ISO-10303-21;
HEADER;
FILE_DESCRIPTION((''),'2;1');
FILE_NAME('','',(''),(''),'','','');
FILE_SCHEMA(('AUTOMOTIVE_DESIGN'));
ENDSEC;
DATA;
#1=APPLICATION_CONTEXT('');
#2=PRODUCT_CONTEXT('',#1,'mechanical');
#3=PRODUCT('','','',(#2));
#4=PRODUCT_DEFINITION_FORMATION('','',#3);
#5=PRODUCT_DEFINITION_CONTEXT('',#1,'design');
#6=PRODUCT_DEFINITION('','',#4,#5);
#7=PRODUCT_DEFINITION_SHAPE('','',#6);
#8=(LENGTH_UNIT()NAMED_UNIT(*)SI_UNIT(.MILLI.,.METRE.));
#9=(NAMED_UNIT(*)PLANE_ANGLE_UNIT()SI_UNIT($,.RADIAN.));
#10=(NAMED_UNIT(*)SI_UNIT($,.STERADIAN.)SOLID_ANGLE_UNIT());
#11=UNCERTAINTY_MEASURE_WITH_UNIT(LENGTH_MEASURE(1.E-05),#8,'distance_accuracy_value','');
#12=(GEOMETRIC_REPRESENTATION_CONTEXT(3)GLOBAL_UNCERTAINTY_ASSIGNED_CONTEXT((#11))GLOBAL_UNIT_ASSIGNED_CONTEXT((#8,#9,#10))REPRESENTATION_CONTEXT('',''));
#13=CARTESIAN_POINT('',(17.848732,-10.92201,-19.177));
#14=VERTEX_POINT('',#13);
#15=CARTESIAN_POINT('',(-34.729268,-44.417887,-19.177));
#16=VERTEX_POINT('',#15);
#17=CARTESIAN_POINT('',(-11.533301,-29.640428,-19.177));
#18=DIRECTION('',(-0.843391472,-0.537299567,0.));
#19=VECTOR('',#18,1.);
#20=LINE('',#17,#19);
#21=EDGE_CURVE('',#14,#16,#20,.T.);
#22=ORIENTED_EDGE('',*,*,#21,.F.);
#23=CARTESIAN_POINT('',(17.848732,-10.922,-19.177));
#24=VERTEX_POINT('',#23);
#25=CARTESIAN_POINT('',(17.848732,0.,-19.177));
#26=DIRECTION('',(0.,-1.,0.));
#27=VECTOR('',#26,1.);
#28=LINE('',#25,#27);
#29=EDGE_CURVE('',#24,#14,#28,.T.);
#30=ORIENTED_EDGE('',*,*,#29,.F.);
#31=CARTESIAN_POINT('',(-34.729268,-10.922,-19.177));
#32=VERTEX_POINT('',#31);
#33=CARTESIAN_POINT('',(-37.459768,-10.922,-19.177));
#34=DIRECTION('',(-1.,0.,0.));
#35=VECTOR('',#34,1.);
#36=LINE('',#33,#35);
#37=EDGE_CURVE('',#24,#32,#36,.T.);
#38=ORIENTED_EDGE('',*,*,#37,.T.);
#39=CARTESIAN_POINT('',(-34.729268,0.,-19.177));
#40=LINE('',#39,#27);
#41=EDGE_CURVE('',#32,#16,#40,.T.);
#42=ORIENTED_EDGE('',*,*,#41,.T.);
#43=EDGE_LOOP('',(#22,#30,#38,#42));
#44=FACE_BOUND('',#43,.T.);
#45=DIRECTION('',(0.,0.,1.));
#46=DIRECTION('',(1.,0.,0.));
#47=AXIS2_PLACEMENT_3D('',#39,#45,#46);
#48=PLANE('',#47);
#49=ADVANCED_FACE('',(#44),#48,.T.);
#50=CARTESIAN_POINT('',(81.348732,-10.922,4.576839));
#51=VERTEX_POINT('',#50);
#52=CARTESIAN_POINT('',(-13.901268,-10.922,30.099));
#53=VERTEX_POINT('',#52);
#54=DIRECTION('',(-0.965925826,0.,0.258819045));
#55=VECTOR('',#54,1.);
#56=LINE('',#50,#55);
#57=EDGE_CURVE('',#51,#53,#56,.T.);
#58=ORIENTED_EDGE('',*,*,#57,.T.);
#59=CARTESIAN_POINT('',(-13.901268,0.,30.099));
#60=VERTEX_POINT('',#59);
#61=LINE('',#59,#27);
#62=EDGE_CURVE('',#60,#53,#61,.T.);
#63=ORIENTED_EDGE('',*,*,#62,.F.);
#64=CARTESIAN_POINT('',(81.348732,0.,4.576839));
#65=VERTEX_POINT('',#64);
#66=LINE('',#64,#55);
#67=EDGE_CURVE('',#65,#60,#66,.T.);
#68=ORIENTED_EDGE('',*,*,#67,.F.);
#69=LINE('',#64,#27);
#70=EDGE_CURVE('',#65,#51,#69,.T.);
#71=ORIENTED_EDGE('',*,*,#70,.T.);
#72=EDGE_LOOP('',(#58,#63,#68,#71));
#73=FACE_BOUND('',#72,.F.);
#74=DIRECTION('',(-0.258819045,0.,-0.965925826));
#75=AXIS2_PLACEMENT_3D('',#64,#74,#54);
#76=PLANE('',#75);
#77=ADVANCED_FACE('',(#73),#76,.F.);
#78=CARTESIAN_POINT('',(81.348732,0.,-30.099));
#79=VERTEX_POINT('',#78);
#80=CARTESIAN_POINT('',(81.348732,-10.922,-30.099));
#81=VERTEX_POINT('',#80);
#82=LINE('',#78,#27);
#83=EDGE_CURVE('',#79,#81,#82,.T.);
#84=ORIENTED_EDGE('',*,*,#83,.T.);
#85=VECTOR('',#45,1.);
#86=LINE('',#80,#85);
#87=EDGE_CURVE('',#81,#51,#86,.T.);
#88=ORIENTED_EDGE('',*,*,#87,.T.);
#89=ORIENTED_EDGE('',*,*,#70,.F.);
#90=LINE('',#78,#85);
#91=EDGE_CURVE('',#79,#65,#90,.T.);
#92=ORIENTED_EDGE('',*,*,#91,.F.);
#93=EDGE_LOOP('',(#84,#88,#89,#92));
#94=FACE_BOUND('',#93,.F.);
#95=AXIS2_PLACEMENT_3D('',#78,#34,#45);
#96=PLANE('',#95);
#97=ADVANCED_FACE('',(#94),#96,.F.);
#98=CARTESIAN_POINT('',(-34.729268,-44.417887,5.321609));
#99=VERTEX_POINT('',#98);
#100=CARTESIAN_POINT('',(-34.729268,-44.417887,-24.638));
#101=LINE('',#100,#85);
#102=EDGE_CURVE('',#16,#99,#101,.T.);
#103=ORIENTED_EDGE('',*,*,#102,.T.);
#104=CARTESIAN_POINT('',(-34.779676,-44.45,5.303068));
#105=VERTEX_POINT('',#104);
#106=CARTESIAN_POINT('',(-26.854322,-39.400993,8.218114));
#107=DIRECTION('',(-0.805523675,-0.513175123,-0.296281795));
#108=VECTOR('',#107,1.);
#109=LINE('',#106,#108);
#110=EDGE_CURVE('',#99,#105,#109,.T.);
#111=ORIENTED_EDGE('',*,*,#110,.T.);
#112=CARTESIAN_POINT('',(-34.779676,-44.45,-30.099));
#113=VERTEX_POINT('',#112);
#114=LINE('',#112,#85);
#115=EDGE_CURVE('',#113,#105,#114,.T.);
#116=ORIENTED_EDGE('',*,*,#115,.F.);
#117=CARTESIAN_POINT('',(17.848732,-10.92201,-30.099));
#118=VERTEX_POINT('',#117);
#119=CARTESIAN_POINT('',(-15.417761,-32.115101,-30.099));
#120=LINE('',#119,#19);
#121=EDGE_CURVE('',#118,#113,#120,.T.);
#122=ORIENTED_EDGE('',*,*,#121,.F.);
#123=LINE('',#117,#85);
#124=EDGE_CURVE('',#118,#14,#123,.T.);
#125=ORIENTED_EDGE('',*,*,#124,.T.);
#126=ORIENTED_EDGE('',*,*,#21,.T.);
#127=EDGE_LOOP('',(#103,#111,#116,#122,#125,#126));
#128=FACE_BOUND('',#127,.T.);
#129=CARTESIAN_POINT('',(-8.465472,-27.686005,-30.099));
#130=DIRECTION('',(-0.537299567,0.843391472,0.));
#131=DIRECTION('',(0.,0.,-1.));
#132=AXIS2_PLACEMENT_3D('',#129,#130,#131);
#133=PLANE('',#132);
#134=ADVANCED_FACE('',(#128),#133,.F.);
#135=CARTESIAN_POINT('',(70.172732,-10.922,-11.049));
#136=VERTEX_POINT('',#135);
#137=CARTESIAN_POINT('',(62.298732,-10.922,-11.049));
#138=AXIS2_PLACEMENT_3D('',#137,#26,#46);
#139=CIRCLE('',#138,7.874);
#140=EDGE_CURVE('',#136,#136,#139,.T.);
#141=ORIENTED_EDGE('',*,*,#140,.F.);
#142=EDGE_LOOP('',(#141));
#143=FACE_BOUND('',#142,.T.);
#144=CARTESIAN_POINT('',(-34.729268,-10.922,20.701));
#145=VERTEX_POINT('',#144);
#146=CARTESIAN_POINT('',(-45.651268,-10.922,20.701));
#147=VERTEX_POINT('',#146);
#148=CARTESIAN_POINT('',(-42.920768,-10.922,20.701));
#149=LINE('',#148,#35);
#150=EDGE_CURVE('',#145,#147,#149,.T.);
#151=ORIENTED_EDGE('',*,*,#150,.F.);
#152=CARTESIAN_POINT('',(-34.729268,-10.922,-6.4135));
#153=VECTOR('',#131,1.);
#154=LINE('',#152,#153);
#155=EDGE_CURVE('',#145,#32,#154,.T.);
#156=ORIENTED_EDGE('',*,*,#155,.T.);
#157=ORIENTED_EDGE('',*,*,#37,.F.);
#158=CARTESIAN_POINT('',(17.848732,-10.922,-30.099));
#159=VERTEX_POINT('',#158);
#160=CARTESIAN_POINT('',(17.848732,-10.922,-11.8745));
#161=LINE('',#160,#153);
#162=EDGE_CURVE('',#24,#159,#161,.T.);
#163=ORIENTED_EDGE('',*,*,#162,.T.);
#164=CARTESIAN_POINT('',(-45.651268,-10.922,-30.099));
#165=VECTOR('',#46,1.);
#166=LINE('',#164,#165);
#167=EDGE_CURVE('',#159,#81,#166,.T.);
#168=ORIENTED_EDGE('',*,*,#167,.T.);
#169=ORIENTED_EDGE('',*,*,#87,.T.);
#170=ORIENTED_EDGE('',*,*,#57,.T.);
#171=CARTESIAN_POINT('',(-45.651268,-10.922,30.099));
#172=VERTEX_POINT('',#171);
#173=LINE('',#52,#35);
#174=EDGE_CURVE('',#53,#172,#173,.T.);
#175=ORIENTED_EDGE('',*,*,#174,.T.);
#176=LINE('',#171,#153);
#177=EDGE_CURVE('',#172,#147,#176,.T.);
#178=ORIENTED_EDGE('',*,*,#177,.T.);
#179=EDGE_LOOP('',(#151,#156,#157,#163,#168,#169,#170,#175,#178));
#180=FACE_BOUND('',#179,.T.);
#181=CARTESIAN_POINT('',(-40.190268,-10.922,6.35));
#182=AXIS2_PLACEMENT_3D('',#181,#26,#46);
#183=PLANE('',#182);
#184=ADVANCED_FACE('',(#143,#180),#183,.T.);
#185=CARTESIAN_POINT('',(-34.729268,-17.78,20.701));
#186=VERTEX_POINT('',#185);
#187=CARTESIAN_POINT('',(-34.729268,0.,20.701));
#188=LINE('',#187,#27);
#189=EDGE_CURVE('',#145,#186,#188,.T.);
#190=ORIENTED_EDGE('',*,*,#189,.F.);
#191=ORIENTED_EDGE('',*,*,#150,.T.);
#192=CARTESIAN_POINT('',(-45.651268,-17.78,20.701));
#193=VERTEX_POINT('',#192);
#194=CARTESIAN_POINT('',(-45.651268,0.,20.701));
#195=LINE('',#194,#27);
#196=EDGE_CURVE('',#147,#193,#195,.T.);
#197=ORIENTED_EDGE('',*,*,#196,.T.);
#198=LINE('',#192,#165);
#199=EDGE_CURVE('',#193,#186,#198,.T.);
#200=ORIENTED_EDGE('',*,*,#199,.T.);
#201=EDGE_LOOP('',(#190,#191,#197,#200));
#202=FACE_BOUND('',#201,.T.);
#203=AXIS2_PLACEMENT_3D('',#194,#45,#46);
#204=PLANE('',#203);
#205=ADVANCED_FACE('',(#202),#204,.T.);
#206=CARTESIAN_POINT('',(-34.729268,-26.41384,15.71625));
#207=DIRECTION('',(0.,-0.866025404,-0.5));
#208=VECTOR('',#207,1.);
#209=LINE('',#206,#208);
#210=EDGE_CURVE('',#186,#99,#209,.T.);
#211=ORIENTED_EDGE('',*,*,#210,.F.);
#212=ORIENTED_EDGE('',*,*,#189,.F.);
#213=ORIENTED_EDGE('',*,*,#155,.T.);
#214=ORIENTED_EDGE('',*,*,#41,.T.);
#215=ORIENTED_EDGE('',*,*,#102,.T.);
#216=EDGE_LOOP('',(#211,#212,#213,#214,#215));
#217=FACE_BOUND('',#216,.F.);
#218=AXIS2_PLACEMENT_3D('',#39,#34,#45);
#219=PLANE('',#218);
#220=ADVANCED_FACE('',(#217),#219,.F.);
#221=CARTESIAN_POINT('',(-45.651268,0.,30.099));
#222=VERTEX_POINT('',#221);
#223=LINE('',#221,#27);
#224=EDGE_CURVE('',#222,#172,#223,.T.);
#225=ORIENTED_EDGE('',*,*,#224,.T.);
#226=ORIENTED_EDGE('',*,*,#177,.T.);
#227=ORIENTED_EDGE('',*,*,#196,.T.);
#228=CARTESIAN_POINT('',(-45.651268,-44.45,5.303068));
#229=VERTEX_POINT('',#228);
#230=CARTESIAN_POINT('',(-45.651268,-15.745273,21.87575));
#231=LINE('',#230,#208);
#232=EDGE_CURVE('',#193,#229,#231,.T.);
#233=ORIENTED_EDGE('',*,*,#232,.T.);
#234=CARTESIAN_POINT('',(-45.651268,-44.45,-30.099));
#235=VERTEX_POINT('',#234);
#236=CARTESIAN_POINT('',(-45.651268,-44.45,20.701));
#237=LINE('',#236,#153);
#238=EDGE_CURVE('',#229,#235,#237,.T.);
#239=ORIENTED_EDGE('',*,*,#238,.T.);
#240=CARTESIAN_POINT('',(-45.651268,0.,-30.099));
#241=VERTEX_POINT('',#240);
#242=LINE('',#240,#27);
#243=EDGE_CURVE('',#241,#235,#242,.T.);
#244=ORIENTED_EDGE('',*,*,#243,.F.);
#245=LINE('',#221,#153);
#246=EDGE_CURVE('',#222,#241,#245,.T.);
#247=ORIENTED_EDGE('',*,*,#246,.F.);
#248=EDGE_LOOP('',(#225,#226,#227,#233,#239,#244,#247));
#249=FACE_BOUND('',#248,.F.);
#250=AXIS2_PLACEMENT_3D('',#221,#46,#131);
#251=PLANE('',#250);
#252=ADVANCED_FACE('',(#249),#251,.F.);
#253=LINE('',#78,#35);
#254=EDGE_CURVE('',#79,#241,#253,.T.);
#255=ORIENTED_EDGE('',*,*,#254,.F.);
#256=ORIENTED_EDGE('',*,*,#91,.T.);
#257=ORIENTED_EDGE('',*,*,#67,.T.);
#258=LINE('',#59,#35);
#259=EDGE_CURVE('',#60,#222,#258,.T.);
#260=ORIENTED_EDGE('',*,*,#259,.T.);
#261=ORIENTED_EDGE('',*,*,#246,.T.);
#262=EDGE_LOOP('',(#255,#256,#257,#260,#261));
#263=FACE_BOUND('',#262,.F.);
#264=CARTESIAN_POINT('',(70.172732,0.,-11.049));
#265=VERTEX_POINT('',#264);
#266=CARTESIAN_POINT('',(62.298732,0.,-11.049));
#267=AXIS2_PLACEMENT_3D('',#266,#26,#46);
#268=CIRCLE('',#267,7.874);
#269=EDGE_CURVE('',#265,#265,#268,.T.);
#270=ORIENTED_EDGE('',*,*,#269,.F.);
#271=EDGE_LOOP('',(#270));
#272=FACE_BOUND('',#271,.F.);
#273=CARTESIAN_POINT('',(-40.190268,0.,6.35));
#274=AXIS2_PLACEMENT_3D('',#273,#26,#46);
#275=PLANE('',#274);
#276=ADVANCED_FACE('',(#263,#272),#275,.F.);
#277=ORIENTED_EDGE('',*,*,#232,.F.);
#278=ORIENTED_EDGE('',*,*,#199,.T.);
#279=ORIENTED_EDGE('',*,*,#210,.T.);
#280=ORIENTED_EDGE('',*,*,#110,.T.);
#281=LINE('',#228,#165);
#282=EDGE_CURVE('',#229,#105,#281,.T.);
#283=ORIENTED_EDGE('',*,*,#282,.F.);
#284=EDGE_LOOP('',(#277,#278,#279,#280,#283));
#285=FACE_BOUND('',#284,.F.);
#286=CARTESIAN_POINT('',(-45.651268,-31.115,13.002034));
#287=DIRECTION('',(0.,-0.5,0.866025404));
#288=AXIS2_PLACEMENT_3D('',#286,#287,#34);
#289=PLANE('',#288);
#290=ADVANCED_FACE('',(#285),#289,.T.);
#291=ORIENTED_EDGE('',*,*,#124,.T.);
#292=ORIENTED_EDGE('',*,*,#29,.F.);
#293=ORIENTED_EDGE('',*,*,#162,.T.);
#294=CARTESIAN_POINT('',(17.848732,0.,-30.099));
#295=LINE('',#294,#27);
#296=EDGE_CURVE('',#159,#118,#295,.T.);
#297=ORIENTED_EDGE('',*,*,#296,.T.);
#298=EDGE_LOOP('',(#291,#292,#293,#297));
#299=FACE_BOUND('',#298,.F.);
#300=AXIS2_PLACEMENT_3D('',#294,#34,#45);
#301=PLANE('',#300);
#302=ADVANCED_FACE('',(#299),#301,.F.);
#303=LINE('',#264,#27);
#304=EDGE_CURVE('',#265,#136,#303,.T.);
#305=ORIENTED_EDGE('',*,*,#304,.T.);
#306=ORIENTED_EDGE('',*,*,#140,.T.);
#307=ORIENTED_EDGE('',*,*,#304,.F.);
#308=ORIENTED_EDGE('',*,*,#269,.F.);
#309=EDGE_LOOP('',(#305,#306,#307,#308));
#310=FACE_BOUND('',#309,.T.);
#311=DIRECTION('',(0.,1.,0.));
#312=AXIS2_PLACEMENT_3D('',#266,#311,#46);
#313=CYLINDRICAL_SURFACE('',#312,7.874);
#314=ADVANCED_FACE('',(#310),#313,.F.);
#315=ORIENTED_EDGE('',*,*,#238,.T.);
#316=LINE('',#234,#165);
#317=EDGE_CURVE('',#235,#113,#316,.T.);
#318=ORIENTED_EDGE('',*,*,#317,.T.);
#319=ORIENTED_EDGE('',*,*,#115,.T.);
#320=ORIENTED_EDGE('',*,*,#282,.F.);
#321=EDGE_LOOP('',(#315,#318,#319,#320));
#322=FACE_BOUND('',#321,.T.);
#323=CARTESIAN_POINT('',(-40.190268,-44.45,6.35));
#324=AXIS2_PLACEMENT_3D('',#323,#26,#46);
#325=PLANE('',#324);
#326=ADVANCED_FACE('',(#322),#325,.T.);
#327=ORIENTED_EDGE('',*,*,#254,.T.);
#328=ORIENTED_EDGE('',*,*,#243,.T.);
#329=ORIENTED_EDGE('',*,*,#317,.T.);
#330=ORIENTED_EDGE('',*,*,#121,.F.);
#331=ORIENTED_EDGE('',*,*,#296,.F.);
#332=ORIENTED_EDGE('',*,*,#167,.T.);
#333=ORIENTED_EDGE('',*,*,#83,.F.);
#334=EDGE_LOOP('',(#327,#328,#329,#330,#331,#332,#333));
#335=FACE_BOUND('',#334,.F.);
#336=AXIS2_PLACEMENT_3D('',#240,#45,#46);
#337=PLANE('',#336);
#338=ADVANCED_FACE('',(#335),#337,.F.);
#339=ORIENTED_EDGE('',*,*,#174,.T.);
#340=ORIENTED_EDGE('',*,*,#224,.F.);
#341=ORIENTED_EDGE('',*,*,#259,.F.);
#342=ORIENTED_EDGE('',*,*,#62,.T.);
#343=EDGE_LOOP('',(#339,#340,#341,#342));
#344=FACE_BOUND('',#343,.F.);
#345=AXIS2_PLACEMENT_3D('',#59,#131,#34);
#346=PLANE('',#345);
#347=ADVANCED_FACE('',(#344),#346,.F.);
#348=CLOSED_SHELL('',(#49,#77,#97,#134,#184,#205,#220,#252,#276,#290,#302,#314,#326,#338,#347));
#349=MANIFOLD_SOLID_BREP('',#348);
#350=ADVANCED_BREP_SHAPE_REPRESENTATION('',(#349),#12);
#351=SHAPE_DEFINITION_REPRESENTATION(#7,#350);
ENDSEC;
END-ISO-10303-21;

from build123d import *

# Parameters (mm, degrees)
F0_W     = 10.922
F0_H     = 28.702
F0_W_2   = 52.578
F0_H_2   = 10.922
F0_R     = 7.874
F1_DEPTH = 10.922
F2_DEPTH = 44.45
F3_SIZE2 = 52.628408
F3_SIZE  = 33.52799
F4_SIZE2 = 15.3979316793
F4_SIZE  = 26.67


# Not quite as in the source:
# - a fillet or chamfer is up to 0.001 mm smaller than in the source, because OpenCascade refuses the exact size


with BuildPart() as f1:
    # F0 (on Front) → F1 (new body)
    with BuildSketch(Plane.XZ):
        with Locations((-40.1902680954, 6.35)):
            Rectangle(F0_W, F0_H)
        with Locations((-8.4402680954, -24.638)):
            Rectangle(F0_W_2, F0_H_2)
        Polygon((-13.9012680954, 30.099), (-45.6512680954, 30.099), (-45.6512680954, 20.701), (-34.7292680954, 20.701), (-34.7292680954, -8.001), (-34.7292680954, -19.177), (17.8487319046, -19.177), (17.8487319046, -30.099), (81.3487319046, -30.099), (81.3487319046, 4.5768394209), align=None)
        with Locations((62.2987319046, -11.049)):
            Circle(F0_R, mode=Mode.SUBTRACT)
        Polygon((-34.7292680954, -8.001), (-45.6512680954, -8.001), (-45.6512680954, -30.099), (-34.7292680954, -30.099), (-34.7292680954, -19.177), align=None)
    extrude(amount=F1_DEPTH)

    # F0 (on Front) → F2 (join)
    with BuildSketch(Plane.XZ):
        with Locations((-40.1902680954, 6.35)):
            Rectangle(F0_W, F0_H)
        with Locations((-8.4402680954, -24.638)):
            Rectangle(F0_W_2, F0_H_2)
        Polygon((-34.7292680954, -8.001), (-45.6512680954, -8.001), (-45.6512680954, -30.099), (-34.7292680954, -30.099), (-34.7292680954, -19.177), align=None)
    extrude(amount=F2_DEPTH)

    # F3 (size 33.528 and 52.6284180296 in the source; OpenCascade refuses exactly that, so slightly less here)
    f3_edges = [f1.edges().sort_by_distance(p)[0] for p in [
        (17.848732, -44.45, -24.638),
    ]]
    f3_side = f1.faces().sort_by_distance((17.848732, -27.686, -24.638))[0]
    chamfer(f3_edges, length=F3_SIZE, length2=F3_SIZE2, reference=f3_side)

    # F4
    f4_edges = [f1.edges().sort_by_distance(p)[0] for p in [
        (-40.215472, -44.45, 20.701),
    ]]
    f4_side = f1.faces().sort_by_distance((-40.19028, -27.685963, 20.701))[0]
    chamfer(f4_edges, length=F4_SIZE, length2=F4_SIZE2, reference=f4_side)


solid = f1.part
